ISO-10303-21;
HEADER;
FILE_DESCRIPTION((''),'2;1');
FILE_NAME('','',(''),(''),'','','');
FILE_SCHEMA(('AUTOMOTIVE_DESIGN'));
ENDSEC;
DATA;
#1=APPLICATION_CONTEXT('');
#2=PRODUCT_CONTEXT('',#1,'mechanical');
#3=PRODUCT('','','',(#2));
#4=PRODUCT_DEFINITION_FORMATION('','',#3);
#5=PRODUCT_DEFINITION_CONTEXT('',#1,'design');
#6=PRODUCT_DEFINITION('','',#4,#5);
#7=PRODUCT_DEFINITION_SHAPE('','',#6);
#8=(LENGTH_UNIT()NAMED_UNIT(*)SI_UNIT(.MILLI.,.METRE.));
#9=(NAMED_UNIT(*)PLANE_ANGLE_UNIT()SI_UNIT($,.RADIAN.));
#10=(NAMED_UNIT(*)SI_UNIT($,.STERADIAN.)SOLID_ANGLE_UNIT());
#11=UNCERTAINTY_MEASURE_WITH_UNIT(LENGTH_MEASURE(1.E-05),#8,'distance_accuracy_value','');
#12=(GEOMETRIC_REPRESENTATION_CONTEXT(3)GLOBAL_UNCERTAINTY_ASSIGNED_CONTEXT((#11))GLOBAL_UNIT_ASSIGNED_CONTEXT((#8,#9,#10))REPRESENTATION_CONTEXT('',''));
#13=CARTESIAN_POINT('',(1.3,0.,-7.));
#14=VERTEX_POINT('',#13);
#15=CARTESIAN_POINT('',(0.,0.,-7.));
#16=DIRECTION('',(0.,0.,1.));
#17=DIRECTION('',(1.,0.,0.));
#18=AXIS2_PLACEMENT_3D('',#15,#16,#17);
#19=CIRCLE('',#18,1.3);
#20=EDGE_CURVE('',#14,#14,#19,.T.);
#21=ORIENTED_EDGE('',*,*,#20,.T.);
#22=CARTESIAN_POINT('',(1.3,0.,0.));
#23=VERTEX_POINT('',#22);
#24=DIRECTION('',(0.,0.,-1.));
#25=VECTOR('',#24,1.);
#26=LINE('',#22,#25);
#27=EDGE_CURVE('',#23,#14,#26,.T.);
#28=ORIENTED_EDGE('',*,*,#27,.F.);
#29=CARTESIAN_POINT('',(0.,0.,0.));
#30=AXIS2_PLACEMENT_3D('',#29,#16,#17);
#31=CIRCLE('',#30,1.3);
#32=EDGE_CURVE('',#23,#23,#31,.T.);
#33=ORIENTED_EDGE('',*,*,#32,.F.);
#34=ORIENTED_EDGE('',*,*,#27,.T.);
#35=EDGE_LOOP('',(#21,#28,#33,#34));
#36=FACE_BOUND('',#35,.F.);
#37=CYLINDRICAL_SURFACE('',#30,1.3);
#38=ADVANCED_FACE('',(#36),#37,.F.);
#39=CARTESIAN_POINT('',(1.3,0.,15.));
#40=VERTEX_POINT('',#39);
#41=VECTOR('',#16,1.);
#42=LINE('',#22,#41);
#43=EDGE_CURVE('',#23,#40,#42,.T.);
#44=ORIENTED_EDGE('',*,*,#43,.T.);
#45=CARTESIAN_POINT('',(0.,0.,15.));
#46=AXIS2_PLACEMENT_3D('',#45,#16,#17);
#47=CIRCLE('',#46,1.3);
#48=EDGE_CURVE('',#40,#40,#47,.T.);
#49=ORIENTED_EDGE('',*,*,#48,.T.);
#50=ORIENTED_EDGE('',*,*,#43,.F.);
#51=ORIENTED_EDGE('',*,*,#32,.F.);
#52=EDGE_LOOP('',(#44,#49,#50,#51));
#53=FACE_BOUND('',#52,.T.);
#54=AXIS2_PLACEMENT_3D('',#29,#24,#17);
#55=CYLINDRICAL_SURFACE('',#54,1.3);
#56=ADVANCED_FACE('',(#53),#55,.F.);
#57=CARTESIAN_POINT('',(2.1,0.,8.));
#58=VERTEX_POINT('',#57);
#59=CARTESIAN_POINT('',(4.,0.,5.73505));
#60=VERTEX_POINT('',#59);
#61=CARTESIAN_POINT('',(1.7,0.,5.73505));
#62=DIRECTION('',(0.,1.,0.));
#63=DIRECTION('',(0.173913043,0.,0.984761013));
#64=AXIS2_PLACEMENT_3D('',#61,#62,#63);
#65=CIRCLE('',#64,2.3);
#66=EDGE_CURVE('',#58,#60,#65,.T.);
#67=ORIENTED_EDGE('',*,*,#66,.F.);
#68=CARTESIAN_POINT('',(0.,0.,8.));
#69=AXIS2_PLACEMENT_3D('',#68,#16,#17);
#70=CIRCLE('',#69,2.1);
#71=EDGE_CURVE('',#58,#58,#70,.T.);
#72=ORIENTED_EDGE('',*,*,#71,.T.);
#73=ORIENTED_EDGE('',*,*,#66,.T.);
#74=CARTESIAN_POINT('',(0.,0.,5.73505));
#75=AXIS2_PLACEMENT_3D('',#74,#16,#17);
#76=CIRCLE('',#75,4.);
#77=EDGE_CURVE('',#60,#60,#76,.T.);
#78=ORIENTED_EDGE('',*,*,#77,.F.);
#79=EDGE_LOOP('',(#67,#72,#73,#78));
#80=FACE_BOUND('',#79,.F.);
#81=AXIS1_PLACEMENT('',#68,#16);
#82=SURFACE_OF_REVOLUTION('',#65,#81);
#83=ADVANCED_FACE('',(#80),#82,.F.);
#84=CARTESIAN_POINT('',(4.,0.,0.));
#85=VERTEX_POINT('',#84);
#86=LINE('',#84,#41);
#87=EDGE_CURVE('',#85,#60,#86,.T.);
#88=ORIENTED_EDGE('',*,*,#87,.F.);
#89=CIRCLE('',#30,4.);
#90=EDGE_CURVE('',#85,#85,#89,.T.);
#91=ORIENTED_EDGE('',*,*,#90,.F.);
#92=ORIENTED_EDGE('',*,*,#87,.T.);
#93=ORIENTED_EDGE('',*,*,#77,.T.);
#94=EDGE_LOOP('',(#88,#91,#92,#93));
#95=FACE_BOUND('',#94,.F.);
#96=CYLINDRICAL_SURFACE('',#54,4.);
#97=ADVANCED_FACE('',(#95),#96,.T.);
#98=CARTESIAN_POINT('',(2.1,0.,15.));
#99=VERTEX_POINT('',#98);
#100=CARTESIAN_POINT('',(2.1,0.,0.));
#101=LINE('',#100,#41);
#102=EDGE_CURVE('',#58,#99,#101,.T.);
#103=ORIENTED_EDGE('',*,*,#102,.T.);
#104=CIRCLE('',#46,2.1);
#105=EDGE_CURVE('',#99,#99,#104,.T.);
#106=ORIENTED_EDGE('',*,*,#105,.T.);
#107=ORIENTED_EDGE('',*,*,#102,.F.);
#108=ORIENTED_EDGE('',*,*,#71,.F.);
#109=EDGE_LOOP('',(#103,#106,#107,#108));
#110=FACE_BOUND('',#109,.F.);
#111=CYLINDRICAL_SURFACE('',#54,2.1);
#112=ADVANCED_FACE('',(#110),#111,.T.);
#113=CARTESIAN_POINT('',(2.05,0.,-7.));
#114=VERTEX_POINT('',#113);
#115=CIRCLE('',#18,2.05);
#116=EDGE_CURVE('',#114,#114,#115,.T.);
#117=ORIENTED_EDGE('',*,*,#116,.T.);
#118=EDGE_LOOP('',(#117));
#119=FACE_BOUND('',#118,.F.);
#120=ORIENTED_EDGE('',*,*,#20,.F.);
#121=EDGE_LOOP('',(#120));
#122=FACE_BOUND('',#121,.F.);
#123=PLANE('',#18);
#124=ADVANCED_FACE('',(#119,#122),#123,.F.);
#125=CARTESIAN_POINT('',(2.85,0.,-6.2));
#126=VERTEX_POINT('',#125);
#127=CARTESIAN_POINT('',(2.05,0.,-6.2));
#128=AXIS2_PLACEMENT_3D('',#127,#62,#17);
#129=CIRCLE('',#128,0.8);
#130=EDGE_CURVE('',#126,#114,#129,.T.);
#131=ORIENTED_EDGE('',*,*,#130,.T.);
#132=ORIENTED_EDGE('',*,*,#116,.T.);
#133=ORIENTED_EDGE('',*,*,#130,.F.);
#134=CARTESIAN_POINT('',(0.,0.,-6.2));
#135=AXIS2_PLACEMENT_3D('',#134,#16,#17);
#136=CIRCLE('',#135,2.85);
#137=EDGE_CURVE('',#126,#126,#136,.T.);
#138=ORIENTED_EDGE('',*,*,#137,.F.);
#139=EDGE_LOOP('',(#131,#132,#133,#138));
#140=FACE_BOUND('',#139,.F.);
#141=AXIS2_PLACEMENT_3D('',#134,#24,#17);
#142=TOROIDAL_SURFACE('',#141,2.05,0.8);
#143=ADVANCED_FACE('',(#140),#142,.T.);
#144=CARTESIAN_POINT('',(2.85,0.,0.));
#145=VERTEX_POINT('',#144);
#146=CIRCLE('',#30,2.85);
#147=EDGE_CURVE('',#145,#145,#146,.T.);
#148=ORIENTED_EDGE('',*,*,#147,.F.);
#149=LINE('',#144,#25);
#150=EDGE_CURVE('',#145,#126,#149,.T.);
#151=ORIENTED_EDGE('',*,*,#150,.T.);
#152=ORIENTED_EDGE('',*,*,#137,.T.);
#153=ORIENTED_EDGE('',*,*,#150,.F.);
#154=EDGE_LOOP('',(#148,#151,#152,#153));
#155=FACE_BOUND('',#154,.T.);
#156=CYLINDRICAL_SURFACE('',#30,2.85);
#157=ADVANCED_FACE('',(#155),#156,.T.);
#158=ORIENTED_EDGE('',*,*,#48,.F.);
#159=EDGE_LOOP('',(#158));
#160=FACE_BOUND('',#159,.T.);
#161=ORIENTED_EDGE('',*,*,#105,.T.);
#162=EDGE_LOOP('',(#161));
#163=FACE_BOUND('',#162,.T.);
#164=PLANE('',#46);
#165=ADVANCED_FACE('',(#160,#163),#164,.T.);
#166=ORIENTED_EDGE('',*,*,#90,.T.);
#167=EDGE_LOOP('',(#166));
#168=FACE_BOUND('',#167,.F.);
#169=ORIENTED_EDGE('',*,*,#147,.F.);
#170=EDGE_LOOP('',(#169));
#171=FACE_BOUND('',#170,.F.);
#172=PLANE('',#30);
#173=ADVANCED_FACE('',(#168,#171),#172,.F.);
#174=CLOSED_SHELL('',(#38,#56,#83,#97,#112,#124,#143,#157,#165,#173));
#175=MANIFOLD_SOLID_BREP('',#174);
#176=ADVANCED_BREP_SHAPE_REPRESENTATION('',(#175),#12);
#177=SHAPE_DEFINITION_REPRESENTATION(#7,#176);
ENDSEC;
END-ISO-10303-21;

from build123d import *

# Parameters (mm, degrees)
F0_R     = 2.1
F0_R_2   = 1.3
F1_DEPTH = 15
F0_R_3   = 2.85
F2_DEPTH = 7
F0_R_4   = 4
F3_DEPTH = 8
F5_R     = 0.8


# Not quite as in the source:
# - a fillet or chamfer that OpenCascade refuses, or shapes differently, is made with other operations: its cross-section is extruded or revolved along the edge and cut away or added


with BuildPart() as f1:
    # F0 (on Top) → F1 (new body)
    with BuildSketch(Plane.XY):
        Circle(F0_R)
        Circle(F0_R_2, mode=Mode.SUBTRACT)
    extrude(amount=F1_DEPTH)

    # F0 (on Top) → F2 (join)
    with BuildSketch(Plane.XY):
        Circle(F0_R_3)
        Circle(F0_R, mode=Mode.SUBTRACT)
        Circle(F0_R)
        Circle(F0_R_2, mode=Mode.SUBTRACT)
    extrude(amount=-F2_DEPTH)

    # F0 (on Top) → F3 (join)
    with BuildSketch(Plane.XY):
        Circle(F0_R_4)
        Circle(F0_R_3, mode=Mode.SUBTRACT)
        Circle(F0_R_3)
        Circle(F0_R, mode=Mode.SUBTRACT)
    extrude(amount=F3_DEPTH)

    # F4: fillet of radius 2.3 on 1 edges, made by hand

    # F4_s1 → F4_t2 (revolve, cut)
    with BuildSketch(Plane.XZ):
        with BuildLine():
            ThreePointArc((2.1, 8), (3.4621010187, 7.2132242193), (4, 5.7350496694))
            Line((4, 5.7350496694), (4, 8))
            Line((4, 8), (2.1, 8))
        make_face()
    revolve(axis=Axis((0, 0, 8), (0, 0, 1)), mode=Mode.SUBTRACT)

    # F5
    f5_edges = [f1.edges().sort_by_distance(p)[0] for p in [
        (-2.85, 0, -7),
    ]]
    fillet(f5_edges, radius=F5_R)


solid = f1.part
